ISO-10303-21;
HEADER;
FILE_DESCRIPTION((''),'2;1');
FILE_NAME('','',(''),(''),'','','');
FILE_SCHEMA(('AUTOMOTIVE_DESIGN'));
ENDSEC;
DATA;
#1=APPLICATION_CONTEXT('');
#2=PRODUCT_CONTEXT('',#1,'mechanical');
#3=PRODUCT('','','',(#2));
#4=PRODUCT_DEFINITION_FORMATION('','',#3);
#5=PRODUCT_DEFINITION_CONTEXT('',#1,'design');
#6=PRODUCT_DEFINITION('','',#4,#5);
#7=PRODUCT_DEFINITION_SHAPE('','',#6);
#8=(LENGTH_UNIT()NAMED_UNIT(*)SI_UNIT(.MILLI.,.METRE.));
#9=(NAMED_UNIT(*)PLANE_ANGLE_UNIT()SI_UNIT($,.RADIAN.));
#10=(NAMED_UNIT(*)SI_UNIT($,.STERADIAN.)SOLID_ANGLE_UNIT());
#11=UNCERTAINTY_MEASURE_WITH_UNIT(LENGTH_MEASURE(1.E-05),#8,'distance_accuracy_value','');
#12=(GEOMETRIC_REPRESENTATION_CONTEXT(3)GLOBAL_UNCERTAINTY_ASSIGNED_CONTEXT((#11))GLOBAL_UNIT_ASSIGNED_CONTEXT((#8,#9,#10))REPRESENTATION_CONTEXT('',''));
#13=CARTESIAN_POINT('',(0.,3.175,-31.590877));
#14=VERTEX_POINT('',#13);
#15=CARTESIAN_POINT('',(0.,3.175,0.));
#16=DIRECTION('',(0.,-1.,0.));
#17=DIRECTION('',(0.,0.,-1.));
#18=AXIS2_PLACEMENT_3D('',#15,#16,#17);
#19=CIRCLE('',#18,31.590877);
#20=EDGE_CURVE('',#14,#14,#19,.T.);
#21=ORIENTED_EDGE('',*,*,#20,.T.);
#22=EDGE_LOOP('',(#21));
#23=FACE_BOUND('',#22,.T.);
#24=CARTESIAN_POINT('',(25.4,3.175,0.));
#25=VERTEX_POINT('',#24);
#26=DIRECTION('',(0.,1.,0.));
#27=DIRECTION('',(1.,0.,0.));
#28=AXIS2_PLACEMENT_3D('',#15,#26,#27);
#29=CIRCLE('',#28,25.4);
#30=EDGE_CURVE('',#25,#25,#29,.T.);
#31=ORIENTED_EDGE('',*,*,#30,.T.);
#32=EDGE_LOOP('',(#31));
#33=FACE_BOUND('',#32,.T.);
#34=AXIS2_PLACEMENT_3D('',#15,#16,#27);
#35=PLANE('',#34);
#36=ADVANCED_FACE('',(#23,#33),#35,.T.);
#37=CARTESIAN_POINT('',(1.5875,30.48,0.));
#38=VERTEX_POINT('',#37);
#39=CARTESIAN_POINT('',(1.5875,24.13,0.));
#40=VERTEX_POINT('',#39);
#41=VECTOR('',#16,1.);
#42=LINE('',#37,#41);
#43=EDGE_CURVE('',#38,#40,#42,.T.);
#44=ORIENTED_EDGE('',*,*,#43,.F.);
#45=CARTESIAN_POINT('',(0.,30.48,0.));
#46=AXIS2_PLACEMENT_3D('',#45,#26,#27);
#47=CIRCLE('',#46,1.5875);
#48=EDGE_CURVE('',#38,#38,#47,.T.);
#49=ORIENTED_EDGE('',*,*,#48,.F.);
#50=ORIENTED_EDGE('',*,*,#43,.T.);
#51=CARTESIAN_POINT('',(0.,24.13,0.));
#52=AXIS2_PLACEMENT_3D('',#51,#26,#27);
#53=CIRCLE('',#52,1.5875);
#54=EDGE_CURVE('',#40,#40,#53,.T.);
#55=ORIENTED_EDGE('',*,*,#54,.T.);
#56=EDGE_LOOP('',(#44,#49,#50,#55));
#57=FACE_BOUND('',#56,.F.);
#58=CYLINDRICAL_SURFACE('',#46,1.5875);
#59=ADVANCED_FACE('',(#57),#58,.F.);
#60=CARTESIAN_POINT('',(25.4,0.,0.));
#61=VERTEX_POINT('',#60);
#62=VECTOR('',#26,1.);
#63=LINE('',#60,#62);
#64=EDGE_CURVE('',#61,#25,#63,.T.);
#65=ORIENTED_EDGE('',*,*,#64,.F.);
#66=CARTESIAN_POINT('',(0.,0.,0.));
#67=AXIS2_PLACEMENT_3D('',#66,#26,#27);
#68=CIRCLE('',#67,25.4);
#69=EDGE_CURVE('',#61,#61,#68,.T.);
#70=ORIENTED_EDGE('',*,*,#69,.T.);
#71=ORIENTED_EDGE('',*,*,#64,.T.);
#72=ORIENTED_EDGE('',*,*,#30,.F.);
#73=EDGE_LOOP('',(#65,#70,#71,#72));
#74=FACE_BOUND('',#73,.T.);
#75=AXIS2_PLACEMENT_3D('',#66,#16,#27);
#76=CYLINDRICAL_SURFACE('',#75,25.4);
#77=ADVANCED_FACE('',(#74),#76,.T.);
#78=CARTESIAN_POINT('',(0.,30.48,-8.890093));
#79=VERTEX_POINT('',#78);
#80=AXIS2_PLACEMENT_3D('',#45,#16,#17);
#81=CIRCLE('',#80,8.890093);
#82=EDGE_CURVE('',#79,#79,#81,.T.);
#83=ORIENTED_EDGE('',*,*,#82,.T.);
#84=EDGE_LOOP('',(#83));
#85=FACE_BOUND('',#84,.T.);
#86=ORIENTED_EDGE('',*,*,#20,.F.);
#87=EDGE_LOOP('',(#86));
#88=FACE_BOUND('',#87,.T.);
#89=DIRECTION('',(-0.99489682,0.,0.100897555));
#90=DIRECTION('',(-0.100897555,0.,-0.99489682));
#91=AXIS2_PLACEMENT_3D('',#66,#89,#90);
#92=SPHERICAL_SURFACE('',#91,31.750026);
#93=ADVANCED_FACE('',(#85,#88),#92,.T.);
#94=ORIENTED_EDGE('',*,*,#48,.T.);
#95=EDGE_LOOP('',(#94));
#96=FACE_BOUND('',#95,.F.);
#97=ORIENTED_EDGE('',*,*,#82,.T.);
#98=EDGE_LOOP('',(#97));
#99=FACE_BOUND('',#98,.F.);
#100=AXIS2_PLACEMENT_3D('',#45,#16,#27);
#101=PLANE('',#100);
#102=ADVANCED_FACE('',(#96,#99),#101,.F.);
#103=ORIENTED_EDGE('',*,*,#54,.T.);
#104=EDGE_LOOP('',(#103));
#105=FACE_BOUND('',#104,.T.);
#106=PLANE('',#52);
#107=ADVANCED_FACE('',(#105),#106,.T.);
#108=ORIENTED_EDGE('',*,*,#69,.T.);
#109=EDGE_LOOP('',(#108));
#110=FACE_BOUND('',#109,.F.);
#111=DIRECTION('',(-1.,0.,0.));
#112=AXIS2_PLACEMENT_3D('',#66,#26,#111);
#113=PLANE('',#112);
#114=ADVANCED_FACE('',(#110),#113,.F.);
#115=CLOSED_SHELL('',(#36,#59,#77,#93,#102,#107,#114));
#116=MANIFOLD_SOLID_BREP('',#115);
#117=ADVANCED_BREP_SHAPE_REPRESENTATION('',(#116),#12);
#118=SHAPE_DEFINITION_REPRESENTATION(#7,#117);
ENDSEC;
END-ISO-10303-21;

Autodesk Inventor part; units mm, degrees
ref_plane "YZ Plane" through (0, 0, 0) normal (1, 0, 0) x (0, 1, 0)
ref_plane "XZ Plane" through (0, 0, 0) normal (0, 1, 0) x (-1, 0, 0)
ref_plane "XY Plane" through (0, 0, 0) normal (0, 0, 1) x (1, 0, 0)
sketch "Sketch1" plane through (0, 0, 0) normal (0, 1, 0) x (-1, 0, 0)
  arc A0 (-31.588, -3.2035) -> (31.588, 3.2035) centre (0, 0) ccw
  line L0 (0, 0) -> (-31.588, -3.2035) construction
  line L1 (0, 0) -> (31.588, 3.2035) construction
  line L2 (31.588, 3.2035) -> (-31.588, -3.2035)
revolve "Revolution1" add sketch "Sketch1" angle 180 about axis through (0, 0, 0) along (0.9948968, 0, -0.1008975)
sketch "Sketch2" plane through (0, 0, 0) normal (0, -1, 0) x (1, 0, 0)
  circle A0 centre (0, 0) radius 31.75
extrude "Extrusion1" cut sketch "Sketch2" against normal blind 30.48 keep common part
sketch "Sketch3" plane through (0, 0, 0) normal (0, -1, 0) x (1, 0, 0)
  line L0 (0, 0) -> (0, -27.94)
  circle A0 centre (0, 0) radius 8.89 projected
  line L1 (0, 0) -> (0, 25.4)
  circle A1 centre (0, 0) radius 27.94
  circle A2 centre (0, 0) radius 25.4
  dimension "d7" = 27.94
  dimension "d8" = 25.4
extrude "Extrusion2" cut sketch "Sketch3" against normal blind 3.175
sketch "Sketch4" plane through (0, 30.48, 0) normal (0, 1, 0) x (1, 0, 0)
  circle A0 centre (0, 0) radius 1.5875
  dimension "d11" = 3.175
extrude "Extrusion3" cut sketch "Sketch4" against normal blind 6.35
sketch "Sketch5" plane through (0, 0, 0) normal (0, -1, 0) x (1, 0, 0)
  circle A0 centre (0, 0) radius 1.5875 projected
  circle A1 centre (0, 0) radius 31.75
  circle A2 centre (0, 0) radius 27.94
extrude "Extrusion4" cut sketch "Sketch5" against normal blind 3.175 contours A1
properties part number "ball tops"
